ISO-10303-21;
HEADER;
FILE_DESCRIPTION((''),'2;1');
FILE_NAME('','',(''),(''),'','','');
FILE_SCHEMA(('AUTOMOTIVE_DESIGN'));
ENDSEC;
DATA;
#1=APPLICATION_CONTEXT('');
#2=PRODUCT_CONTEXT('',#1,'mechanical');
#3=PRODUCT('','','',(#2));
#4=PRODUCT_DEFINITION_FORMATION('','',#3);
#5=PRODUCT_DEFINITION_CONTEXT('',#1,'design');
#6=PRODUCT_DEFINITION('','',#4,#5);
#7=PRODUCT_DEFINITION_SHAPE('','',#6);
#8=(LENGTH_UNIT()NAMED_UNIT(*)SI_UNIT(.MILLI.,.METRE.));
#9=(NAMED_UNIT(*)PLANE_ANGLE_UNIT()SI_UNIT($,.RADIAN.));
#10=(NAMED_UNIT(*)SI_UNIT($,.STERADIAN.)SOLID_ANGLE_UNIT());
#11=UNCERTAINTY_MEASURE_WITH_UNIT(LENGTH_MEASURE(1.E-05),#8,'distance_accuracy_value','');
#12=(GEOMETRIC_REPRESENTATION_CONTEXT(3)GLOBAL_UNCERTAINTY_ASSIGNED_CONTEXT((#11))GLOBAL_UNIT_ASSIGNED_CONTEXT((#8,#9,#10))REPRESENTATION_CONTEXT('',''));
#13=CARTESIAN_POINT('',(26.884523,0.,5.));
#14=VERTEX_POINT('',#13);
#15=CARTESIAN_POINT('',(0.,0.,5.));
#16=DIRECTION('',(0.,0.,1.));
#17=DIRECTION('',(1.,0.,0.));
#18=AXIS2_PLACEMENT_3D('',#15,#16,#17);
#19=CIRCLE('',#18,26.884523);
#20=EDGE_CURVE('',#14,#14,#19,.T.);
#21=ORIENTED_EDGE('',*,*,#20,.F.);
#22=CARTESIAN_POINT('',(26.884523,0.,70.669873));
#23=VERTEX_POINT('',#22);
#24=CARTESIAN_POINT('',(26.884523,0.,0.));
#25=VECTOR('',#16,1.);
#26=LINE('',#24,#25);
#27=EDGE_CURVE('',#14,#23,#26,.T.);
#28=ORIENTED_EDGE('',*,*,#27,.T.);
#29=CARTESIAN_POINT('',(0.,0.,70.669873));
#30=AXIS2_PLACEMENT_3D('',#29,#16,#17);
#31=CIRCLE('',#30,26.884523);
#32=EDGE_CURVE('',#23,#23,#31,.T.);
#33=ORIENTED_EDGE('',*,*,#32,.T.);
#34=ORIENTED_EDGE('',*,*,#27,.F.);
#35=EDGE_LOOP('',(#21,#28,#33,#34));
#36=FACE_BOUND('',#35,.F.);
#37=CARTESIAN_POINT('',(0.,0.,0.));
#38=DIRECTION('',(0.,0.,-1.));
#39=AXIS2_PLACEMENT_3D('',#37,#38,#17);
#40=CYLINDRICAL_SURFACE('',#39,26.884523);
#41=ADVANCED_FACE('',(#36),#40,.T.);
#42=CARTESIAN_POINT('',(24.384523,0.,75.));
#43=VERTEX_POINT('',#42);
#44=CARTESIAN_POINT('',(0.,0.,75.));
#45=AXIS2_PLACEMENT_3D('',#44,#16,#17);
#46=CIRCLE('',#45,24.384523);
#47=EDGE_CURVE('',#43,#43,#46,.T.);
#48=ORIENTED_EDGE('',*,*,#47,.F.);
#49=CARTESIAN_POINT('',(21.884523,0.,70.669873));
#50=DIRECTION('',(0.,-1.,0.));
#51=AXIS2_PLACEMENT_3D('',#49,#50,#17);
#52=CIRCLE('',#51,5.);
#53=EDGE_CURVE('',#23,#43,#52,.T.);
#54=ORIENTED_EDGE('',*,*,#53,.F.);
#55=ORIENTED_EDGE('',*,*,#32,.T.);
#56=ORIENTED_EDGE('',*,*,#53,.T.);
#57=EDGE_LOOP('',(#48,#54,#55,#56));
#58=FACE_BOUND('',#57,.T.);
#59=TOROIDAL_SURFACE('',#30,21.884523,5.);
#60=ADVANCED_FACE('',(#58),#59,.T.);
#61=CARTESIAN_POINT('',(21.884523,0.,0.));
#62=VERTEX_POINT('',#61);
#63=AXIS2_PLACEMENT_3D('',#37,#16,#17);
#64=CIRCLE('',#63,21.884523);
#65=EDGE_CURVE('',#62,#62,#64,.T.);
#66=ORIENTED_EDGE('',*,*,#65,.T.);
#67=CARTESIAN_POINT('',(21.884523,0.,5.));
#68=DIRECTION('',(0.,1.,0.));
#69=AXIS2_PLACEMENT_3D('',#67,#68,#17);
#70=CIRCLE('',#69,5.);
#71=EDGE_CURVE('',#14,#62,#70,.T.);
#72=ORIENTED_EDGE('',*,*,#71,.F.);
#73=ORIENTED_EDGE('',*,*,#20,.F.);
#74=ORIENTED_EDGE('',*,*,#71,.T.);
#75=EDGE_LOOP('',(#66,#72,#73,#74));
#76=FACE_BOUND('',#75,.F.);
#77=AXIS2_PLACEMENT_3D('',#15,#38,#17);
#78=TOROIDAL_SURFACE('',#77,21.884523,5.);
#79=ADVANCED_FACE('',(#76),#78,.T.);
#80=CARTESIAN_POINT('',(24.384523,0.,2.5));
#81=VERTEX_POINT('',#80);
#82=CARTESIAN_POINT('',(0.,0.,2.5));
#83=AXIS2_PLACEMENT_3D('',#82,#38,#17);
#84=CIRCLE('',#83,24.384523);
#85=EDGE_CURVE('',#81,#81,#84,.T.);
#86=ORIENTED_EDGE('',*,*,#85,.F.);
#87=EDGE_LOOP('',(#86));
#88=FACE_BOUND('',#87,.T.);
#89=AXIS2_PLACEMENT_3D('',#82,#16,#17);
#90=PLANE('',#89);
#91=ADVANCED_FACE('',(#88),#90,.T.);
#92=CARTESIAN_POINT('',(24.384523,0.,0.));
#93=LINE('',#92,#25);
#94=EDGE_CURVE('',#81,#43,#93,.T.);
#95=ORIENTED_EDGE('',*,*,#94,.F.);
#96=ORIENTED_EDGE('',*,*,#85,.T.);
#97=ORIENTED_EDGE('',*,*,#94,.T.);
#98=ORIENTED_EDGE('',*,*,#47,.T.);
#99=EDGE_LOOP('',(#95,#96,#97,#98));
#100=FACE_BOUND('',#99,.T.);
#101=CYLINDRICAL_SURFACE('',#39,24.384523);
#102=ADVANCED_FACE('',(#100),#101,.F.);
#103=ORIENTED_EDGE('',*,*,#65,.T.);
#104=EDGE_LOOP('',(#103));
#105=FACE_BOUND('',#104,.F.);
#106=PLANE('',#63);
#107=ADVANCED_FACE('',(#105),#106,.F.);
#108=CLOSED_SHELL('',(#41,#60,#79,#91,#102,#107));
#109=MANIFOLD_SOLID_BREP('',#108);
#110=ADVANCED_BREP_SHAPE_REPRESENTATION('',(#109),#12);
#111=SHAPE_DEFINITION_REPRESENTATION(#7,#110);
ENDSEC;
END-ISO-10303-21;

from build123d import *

# Parameters (mm, degrees)
F0_R     = 26.884522514
F1_DEPTH = 75
F2_T     = -2.5
F4_R     = 5


# Not quite as in the source:
# - a fillet or chamfer that OpenCascade refuses, or shapes differently, is made with other operations: its cross-section is extruded or revolved along the edge and cut away or added


with BuildPart() as f1:
    # F0 (on Top) → F1 (new body)
    with BuildSketch(Plane.XY):
        Circle(F0_R)
    extrude(amount=F1_DEPTH)

    # F2
    f2_openings = [f1.faces().sort_by_distance(p)[0] for p in [
        (0, 0, 75),
    ]]
    offset(amount=F2_T, openings=f2_openings)

    # F3: fillet of radius 5 on 1 edges, made by hand

    # F3_s1 → F3_t2 (revolve, cut)
    with BuildSketch(Plane.XZ):
        with BuildLine():
            ThreePointArc((26.884522514, 70.6698729811), (26.2146495329, 73.1698729811), (24.384522514, 75))
            Line((24.384522514, 75), (26.884522514, 75))
            Line((26.884522514, 75), (26.884522514, 70.6698729811))
        make_face()
    revolve(axis=Axis((0, 0, 75), (0, 0, 1)), mode=Mode.SUBTRACT)

    # F4
    f4_edges = [f1.edges().sort_by_distance(p)[0] for p in [
        (-26.884523, 0, 0),
    ]]
    fillet(f4_edges, radius=F4_R)


solid = f1.part
